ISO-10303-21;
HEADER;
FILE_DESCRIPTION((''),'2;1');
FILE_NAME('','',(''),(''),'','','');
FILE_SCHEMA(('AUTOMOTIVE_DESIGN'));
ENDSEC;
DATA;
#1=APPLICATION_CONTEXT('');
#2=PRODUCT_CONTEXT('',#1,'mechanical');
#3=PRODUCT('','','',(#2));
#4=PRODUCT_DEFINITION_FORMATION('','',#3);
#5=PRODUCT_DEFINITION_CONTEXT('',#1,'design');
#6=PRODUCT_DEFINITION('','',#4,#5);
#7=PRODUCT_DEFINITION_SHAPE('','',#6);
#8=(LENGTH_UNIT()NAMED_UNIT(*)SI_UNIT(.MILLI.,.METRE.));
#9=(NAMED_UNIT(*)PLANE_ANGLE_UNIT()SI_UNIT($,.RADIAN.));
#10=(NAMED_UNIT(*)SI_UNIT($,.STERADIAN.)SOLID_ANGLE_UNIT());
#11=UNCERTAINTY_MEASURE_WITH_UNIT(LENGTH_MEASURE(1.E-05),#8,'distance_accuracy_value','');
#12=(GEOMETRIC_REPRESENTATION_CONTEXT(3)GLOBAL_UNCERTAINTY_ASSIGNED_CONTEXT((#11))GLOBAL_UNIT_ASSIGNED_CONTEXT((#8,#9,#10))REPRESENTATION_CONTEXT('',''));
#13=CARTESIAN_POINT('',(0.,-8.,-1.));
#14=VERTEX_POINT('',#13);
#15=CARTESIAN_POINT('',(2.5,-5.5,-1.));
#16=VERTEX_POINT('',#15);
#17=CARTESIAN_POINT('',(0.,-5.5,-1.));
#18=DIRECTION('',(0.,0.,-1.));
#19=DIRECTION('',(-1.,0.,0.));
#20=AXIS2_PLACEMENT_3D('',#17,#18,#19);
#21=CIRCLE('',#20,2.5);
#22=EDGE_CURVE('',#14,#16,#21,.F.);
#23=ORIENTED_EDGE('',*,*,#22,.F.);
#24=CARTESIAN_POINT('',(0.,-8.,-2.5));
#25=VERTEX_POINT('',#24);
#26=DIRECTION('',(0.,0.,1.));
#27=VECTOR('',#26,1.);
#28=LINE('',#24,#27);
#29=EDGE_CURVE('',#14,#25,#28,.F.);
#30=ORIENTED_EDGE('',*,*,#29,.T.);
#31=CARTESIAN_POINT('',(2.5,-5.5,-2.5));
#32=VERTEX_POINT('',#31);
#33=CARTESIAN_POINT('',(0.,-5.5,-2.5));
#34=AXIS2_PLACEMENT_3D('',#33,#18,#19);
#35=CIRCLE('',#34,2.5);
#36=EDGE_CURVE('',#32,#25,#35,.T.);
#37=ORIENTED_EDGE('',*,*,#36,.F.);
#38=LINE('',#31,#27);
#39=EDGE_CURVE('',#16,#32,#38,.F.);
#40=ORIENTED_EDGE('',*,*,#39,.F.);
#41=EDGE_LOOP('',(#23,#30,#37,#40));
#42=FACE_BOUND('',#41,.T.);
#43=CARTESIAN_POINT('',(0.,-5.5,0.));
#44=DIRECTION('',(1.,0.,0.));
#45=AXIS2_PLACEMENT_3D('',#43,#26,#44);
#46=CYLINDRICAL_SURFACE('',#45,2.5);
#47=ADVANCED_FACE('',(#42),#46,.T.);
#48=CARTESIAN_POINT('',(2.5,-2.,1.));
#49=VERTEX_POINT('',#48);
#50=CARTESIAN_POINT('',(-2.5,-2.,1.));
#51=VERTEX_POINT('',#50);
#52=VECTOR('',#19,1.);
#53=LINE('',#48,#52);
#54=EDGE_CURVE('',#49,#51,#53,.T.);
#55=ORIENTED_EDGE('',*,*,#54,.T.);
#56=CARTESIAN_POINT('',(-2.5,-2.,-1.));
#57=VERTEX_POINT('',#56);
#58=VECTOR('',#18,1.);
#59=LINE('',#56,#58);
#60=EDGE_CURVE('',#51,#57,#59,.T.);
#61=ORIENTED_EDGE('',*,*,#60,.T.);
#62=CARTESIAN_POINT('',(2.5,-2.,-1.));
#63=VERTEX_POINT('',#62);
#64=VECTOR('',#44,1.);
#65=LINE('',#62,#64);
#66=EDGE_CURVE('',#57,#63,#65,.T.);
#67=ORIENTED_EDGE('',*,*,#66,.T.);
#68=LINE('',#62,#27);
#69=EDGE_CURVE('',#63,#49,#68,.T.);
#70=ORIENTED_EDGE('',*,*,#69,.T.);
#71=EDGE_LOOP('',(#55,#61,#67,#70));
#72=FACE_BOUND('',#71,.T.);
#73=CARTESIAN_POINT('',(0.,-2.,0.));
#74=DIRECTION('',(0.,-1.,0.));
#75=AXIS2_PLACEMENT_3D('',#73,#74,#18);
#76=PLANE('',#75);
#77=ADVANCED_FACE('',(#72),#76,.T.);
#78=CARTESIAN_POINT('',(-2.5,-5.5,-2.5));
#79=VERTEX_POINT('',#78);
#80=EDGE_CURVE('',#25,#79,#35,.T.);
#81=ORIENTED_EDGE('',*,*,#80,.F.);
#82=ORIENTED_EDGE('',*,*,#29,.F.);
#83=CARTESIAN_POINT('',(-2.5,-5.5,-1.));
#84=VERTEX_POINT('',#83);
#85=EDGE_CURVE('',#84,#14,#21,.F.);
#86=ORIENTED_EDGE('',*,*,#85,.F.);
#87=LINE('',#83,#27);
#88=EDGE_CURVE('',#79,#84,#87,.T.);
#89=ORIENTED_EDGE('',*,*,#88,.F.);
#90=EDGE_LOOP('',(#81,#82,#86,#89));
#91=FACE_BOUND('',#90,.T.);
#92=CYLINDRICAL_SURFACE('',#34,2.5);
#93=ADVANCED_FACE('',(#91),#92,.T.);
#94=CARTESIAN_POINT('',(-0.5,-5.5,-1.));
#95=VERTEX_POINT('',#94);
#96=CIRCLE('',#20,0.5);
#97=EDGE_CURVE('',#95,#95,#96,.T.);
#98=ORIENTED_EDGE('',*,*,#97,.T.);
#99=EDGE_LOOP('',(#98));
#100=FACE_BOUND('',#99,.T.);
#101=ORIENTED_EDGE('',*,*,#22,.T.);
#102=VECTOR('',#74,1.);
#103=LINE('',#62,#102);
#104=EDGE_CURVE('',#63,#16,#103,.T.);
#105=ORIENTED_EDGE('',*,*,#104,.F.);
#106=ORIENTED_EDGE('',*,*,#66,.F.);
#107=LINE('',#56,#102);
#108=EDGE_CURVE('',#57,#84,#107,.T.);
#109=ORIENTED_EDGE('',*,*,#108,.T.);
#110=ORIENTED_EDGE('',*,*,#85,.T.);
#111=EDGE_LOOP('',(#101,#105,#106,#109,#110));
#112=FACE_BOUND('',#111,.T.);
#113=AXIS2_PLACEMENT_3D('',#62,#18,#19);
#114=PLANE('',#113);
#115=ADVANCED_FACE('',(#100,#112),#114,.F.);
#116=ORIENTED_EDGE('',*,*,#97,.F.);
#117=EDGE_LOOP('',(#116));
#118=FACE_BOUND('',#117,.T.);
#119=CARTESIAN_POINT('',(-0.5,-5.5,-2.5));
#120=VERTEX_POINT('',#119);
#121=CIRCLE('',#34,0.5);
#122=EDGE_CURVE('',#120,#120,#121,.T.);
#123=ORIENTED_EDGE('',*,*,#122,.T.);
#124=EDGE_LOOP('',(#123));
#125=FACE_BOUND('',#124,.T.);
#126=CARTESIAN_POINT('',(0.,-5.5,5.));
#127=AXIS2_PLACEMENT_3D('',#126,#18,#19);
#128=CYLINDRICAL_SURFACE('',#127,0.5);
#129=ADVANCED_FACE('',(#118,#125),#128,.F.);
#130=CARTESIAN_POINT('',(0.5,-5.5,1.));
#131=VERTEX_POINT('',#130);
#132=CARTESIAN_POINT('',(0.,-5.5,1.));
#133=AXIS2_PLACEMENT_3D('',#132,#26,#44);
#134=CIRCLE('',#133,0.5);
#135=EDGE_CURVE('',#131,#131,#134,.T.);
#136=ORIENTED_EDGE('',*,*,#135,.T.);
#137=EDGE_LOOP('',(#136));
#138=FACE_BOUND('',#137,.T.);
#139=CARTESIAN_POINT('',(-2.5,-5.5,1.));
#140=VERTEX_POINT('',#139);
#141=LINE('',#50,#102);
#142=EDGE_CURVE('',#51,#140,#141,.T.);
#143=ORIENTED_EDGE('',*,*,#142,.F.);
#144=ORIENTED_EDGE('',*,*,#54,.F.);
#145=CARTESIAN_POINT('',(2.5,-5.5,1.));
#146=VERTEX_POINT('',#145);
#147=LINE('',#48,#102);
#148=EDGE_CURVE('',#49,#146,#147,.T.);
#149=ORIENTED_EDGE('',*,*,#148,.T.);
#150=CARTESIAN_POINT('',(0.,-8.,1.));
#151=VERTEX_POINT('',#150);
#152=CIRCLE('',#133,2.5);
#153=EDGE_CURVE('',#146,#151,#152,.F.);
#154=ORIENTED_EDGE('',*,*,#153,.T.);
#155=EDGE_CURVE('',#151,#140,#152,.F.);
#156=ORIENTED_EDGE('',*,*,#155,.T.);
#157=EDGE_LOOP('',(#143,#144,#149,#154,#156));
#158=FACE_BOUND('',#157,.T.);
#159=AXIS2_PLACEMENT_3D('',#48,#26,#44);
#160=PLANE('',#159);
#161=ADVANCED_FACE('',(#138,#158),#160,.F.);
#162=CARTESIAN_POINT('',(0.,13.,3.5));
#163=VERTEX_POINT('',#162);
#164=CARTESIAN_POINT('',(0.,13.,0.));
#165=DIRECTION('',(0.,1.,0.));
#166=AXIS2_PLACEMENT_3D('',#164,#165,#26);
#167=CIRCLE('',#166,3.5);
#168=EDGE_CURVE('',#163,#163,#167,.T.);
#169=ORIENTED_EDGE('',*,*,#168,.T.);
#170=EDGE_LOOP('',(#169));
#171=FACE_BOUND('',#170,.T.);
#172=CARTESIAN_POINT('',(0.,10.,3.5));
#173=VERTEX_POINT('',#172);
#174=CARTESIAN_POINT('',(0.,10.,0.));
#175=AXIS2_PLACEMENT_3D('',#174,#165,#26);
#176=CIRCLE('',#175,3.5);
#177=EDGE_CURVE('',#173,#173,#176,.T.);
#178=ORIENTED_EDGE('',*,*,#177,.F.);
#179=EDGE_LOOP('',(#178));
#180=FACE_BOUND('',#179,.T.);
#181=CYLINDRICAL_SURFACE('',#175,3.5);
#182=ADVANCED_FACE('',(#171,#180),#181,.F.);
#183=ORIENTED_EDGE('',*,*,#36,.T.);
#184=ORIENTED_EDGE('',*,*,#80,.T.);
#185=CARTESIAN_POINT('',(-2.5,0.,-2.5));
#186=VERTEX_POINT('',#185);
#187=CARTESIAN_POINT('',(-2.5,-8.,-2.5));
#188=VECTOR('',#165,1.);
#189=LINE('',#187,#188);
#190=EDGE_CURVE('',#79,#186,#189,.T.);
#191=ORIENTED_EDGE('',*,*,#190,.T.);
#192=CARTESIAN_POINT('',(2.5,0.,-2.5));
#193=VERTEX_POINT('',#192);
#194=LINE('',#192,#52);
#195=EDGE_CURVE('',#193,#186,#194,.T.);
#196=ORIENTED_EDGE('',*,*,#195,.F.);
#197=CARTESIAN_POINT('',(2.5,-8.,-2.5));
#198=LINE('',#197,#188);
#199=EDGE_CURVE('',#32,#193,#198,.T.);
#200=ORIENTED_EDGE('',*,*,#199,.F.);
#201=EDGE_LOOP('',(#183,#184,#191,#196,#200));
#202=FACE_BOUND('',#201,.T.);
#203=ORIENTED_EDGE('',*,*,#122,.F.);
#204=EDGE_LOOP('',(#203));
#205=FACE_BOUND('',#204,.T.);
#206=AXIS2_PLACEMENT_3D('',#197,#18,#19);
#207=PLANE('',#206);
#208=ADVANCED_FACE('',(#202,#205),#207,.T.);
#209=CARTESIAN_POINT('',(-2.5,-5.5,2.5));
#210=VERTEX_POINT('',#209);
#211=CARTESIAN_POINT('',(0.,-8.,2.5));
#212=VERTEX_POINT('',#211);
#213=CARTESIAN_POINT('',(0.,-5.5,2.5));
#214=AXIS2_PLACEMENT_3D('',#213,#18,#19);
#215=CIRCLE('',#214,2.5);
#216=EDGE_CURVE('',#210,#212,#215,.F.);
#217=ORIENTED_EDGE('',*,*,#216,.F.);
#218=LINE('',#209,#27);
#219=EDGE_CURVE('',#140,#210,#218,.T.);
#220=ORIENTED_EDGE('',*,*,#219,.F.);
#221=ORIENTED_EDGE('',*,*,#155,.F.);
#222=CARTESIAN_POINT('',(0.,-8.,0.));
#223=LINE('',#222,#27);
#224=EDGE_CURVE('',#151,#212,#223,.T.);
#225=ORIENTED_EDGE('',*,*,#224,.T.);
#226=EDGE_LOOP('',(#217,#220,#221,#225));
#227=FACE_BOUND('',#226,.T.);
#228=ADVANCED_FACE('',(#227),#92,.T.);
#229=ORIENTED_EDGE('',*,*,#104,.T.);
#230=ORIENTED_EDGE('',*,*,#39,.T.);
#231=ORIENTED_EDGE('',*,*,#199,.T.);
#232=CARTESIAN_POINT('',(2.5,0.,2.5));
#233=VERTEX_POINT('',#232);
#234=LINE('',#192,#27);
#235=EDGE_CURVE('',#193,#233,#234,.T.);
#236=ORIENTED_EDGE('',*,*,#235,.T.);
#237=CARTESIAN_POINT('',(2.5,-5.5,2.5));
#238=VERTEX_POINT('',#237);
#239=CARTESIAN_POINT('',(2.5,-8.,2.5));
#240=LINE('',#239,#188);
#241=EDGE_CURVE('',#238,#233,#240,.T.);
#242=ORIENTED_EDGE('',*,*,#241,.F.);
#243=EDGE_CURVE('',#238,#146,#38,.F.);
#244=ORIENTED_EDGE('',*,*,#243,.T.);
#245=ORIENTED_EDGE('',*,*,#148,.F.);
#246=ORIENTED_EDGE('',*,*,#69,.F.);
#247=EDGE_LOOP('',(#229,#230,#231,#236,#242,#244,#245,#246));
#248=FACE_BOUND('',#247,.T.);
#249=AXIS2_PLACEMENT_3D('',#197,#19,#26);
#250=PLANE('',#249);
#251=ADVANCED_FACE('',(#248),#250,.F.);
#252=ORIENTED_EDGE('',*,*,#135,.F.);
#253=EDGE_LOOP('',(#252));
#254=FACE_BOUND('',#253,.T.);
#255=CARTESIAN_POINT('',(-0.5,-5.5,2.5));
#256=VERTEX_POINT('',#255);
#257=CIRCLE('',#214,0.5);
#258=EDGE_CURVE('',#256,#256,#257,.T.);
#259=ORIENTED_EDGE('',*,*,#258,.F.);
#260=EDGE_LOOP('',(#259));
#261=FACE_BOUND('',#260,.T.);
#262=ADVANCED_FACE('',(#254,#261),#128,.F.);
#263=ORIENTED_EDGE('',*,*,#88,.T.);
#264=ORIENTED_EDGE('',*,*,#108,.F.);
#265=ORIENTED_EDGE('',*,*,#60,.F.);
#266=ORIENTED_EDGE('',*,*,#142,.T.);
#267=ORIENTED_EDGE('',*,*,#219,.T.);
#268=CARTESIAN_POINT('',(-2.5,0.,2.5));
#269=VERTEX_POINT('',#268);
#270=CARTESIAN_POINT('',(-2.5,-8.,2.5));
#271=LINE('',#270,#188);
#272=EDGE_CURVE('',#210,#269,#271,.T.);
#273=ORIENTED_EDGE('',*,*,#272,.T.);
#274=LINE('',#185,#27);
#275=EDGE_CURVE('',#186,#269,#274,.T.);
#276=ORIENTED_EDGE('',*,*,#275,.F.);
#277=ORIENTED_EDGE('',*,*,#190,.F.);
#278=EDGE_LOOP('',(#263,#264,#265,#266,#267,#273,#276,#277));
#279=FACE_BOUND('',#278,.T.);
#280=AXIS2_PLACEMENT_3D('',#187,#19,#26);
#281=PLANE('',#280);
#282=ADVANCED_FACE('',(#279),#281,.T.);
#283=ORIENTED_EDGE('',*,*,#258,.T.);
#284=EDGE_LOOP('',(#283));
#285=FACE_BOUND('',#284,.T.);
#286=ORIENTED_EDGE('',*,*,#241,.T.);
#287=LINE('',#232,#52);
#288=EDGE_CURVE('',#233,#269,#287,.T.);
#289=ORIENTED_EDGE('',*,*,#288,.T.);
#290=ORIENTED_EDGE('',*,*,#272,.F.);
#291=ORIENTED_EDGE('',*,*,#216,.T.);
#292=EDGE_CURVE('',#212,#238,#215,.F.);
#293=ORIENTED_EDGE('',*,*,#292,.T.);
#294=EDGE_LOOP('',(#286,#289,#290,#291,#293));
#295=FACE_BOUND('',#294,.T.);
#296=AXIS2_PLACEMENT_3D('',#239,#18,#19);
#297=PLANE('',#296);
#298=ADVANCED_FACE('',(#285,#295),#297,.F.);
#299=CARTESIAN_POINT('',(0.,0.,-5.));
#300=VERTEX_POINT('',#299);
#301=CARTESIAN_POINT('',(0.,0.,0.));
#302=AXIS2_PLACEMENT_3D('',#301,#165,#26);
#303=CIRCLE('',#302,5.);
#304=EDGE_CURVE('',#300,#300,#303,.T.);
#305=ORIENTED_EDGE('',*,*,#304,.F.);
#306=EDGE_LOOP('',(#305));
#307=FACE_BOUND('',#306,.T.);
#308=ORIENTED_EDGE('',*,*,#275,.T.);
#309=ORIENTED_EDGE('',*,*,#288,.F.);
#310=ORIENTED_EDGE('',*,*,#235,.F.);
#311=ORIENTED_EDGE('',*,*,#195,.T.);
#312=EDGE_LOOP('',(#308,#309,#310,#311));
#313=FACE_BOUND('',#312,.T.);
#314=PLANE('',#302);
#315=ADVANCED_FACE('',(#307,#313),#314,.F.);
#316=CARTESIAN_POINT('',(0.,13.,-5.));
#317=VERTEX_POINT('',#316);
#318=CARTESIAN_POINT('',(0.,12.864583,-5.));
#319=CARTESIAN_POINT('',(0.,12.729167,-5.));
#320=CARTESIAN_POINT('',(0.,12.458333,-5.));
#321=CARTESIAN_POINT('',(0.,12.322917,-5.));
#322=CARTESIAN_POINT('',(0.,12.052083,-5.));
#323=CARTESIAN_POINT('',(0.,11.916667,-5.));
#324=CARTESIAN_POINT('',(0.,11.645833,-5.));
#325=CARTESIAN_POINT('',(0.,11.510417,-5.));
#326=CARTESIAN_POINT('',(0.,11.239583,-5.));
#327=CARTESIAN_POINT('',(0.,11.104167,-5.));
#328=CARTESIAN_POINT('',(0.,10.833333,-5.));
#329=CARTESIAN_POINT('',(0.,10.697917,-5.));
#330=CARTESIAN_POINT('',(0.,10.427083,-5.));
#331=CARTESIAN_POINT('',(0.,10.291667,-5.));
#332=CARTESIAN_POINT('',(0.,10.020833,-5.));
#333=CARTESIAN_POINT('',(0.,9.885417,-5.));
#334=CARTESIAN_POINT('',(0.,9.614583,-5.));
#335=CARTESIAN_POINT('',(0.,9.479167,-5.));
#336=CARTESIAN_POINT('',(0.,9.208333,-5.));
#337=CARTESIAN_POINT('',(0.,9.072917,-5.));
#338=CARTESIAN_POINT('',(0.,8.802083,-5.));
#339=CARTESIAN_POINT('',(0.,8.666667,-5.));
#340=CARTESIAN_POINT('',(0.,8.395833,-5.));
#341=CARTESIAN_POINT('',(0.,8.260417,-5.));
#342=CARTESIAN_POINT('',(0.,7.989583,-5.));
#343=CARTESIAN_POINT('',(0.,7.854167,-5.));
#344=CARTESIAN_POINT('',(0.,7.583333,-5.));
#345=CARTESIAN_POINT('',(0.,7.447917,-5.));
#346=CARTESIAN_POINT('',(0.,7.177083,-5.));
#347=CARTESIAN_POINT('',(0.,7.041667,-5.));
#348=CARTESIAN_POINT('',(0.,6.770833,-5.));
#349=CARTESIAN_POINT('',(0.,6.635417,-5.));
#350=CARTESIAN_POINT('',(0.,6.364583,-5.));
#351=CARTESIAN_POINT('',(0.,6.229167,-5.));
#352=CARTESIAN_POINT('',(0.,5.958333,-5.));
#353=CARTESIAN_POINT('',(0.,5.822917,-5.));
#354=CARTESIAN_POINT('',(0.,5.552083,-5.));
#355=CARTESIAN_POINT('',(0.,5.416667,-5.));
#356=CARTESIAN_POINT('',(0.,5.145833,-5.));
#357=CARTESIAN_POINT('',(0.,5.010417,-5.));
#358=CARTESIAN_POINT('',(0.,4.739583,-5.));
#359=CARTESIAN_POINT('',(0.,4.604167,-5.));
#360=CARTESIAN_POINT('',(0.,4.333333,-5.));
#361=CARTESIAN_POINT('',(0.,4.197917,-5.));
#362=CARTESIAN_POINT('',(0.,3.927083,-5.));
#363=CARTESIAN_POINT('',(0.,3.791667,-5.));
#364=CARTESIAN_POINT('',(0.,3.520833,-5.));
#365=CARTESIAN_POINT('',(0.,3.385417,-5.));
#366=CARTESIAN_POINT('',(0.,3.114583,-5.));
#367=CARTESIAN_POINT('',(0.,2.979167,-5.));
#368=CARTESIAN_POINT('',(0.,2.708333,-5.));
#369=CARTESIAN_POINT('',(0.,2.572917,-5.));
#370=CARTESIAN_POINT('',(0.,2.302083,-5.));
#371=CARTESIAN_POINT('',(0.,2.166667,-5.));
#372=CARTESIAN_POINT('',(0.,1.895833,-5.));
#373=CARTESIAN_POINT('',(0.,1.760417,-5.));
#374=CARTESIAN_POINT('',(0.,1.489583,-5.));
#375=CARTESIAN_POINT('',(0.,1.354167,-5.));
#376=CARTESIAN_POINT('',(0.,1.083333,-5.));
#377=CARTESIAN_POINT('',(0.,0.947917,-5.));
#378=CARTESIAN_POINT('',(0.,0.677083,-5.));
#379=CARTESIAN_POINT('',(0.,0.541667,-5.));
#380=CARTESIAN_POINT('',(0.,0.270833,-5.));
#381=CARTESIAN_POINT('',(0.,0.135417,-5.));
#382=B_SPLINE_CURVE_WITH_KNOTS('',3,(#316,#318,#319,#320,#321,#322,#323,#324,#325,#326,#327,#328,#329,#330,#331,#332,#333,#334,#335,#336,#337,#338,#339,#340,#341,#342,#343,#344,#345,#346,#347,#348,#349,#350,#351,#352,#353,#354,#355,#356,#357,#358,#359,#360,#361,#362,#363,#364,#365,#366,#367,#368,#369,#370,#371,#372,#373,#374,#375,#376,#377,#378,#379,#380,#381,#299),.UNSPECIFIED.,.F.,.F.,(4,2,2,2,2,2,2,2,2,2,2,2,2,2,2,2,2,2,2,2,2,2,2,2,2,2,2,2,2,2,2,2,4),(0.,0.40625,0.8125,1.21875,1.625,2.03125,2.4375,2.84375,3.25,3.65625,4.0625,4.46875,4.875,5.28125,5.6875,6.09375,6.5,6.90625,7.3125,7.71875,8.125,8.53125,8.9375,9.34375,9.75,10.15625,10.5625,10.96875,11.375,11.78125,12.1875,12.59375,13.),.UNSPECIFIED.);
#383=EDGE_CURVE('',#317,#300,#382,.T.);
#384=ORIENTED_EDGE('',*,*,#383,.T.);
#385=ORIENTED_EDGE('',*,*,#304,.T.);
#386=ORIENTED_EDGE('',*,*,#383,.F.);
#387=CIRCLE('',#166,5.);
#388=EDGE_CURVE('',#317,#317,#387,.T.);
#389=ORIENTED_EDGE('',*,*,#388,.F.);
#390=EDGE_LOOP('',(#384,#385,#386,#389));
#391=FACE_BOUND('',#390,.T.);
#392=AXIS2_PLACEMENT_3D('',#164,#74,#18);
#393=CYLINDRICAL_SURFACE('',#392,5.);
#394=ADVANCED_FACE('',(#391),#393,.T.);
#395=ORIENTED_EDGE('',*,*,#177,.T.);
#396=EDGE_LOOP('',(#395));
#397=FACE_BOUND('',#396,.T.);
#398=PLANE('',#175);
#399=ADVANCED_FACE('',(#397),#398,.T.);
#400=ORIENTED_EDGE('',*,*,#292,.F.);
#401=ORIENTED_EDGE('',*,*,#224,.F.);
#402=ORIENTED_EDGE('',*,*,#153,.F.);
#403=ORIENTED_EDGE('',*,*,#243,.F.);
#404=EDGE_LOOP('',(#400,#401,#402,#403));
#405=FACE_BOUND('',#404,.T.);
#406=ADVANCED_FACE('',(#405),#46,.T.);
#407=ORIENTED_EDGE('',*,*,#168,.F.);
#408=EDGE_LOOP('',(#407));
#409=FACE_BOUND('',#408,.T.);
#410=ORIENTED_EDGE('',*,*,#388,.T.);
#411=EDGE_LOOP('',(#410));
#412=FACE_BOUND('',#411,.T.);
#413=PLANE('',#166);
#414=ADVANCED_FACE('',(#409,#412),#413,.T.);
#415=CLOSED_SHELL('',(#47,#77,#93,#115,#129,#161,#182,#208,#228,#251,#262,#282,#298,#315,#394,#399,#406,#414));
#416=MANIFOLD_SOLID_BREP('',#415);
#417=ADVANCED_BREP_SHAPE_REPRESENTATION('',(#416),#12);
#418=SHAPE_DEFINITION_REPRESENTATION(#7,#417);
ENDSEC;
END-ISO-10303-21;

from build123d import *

# Parameters (mm, degrees)
SKETCH1_R           = 5
BOSS_EXTRUDE1_DEPTH = 13
SKETCH2_R           = 3.5
CUT_EXTRUDE1_DEPTH  = 3
SKETCH3_W           = 5
SKETCH3_H           = 5
BOSS_EXTRUDE2_DEPTH = 8
SKETCH4_W           = 5
SKETCH4_H           = 2
CUT_EXTRUDE2_DEPTH  = 6
FILLET2_R           = 2.5
SKETCH5_R           = 0.5
CUT_EXTRUDE4_DEPTH  = 16.81929202


with BuildPart() as part:
    # Sketch1 → Boss-Extrude1 (new body)
    with BuildSketch(Plane(origin=(0, 0, 0), x_dir=(1, 0, 0), z_dir=(0, 1, 0))):
        with Locations(Location((0, 0, 0), (0, 0, 90))):
            Circle(SKETCH1_R)
    extrude(amount=BOSS_EXTRUDE1_DEPTH)

    # Sketch2 → Cut-Extrude1 (cut)
    with BuildSketch(Plane(origin=(0, 13, 0), x_dir=(1, 0, 0), z_dir=(0, 1, 0))):
        with Locations(Location((0, 0, 0), (0, 0, 270))):
            Circle(SKETCH2_R)
    extrude(amount=-CUT_EXTRUDE1_DEPTH, mode=Mode.SUBTRACT)

    # Sketch3 → Boss-Extrude2 (add)
    with BuildSketch(Plane(origin=(0, 0, 0), x_dir=(-1, 0, 0), z_dir=(0, -1, 0))):
        Rectangle(SKETCH3_W, SKETCH3_H)
    extrude(amount=BOSS_EXTRUDE2_DEPTH)

    # Sketch4 → Cut-Extrude2 (cut)
    with BuildSketch(Plane(origin=(0, -8, 0), x_dir=(-1, 0, 0), z_dir=(0, -1, 0))):
        Rectangle(SKETCH4_W, SKETCH4_H)
    extrude(amount=-CUT_EXTRUDE2_DEPTH, mode=Mode.SUBTRACT)

    # Fillet2
    fillet2_edges = [part.edges().sort_by_distance(p)[0] for p in [
        (-2.5, -8, 1.75),
        (2.5, -8, 1.75),
        (2.5, -8, -1.75),
        (-2.5, -8, -1.75),
    ]]
    fillet(fillet2_edges, radius=FILLET2_R - 0.0001)  # a hair under: the kernel refuses the full size

    # Sketch5 → Cut-Extrude4 (cut, through all)
    with BuildSketch(Plane(origin=(0, 0, -2.5), x_dir=(-1, 0, 0), z_dir=(0, 0, -1))):
        with Locations((0, -5.5)):
            Circle(SKETCH5_R)
    extrude(amount=-CUT_EXTRUDE4_DEPTH, mode=Mode.SUBTRACT)


solid = part.part
